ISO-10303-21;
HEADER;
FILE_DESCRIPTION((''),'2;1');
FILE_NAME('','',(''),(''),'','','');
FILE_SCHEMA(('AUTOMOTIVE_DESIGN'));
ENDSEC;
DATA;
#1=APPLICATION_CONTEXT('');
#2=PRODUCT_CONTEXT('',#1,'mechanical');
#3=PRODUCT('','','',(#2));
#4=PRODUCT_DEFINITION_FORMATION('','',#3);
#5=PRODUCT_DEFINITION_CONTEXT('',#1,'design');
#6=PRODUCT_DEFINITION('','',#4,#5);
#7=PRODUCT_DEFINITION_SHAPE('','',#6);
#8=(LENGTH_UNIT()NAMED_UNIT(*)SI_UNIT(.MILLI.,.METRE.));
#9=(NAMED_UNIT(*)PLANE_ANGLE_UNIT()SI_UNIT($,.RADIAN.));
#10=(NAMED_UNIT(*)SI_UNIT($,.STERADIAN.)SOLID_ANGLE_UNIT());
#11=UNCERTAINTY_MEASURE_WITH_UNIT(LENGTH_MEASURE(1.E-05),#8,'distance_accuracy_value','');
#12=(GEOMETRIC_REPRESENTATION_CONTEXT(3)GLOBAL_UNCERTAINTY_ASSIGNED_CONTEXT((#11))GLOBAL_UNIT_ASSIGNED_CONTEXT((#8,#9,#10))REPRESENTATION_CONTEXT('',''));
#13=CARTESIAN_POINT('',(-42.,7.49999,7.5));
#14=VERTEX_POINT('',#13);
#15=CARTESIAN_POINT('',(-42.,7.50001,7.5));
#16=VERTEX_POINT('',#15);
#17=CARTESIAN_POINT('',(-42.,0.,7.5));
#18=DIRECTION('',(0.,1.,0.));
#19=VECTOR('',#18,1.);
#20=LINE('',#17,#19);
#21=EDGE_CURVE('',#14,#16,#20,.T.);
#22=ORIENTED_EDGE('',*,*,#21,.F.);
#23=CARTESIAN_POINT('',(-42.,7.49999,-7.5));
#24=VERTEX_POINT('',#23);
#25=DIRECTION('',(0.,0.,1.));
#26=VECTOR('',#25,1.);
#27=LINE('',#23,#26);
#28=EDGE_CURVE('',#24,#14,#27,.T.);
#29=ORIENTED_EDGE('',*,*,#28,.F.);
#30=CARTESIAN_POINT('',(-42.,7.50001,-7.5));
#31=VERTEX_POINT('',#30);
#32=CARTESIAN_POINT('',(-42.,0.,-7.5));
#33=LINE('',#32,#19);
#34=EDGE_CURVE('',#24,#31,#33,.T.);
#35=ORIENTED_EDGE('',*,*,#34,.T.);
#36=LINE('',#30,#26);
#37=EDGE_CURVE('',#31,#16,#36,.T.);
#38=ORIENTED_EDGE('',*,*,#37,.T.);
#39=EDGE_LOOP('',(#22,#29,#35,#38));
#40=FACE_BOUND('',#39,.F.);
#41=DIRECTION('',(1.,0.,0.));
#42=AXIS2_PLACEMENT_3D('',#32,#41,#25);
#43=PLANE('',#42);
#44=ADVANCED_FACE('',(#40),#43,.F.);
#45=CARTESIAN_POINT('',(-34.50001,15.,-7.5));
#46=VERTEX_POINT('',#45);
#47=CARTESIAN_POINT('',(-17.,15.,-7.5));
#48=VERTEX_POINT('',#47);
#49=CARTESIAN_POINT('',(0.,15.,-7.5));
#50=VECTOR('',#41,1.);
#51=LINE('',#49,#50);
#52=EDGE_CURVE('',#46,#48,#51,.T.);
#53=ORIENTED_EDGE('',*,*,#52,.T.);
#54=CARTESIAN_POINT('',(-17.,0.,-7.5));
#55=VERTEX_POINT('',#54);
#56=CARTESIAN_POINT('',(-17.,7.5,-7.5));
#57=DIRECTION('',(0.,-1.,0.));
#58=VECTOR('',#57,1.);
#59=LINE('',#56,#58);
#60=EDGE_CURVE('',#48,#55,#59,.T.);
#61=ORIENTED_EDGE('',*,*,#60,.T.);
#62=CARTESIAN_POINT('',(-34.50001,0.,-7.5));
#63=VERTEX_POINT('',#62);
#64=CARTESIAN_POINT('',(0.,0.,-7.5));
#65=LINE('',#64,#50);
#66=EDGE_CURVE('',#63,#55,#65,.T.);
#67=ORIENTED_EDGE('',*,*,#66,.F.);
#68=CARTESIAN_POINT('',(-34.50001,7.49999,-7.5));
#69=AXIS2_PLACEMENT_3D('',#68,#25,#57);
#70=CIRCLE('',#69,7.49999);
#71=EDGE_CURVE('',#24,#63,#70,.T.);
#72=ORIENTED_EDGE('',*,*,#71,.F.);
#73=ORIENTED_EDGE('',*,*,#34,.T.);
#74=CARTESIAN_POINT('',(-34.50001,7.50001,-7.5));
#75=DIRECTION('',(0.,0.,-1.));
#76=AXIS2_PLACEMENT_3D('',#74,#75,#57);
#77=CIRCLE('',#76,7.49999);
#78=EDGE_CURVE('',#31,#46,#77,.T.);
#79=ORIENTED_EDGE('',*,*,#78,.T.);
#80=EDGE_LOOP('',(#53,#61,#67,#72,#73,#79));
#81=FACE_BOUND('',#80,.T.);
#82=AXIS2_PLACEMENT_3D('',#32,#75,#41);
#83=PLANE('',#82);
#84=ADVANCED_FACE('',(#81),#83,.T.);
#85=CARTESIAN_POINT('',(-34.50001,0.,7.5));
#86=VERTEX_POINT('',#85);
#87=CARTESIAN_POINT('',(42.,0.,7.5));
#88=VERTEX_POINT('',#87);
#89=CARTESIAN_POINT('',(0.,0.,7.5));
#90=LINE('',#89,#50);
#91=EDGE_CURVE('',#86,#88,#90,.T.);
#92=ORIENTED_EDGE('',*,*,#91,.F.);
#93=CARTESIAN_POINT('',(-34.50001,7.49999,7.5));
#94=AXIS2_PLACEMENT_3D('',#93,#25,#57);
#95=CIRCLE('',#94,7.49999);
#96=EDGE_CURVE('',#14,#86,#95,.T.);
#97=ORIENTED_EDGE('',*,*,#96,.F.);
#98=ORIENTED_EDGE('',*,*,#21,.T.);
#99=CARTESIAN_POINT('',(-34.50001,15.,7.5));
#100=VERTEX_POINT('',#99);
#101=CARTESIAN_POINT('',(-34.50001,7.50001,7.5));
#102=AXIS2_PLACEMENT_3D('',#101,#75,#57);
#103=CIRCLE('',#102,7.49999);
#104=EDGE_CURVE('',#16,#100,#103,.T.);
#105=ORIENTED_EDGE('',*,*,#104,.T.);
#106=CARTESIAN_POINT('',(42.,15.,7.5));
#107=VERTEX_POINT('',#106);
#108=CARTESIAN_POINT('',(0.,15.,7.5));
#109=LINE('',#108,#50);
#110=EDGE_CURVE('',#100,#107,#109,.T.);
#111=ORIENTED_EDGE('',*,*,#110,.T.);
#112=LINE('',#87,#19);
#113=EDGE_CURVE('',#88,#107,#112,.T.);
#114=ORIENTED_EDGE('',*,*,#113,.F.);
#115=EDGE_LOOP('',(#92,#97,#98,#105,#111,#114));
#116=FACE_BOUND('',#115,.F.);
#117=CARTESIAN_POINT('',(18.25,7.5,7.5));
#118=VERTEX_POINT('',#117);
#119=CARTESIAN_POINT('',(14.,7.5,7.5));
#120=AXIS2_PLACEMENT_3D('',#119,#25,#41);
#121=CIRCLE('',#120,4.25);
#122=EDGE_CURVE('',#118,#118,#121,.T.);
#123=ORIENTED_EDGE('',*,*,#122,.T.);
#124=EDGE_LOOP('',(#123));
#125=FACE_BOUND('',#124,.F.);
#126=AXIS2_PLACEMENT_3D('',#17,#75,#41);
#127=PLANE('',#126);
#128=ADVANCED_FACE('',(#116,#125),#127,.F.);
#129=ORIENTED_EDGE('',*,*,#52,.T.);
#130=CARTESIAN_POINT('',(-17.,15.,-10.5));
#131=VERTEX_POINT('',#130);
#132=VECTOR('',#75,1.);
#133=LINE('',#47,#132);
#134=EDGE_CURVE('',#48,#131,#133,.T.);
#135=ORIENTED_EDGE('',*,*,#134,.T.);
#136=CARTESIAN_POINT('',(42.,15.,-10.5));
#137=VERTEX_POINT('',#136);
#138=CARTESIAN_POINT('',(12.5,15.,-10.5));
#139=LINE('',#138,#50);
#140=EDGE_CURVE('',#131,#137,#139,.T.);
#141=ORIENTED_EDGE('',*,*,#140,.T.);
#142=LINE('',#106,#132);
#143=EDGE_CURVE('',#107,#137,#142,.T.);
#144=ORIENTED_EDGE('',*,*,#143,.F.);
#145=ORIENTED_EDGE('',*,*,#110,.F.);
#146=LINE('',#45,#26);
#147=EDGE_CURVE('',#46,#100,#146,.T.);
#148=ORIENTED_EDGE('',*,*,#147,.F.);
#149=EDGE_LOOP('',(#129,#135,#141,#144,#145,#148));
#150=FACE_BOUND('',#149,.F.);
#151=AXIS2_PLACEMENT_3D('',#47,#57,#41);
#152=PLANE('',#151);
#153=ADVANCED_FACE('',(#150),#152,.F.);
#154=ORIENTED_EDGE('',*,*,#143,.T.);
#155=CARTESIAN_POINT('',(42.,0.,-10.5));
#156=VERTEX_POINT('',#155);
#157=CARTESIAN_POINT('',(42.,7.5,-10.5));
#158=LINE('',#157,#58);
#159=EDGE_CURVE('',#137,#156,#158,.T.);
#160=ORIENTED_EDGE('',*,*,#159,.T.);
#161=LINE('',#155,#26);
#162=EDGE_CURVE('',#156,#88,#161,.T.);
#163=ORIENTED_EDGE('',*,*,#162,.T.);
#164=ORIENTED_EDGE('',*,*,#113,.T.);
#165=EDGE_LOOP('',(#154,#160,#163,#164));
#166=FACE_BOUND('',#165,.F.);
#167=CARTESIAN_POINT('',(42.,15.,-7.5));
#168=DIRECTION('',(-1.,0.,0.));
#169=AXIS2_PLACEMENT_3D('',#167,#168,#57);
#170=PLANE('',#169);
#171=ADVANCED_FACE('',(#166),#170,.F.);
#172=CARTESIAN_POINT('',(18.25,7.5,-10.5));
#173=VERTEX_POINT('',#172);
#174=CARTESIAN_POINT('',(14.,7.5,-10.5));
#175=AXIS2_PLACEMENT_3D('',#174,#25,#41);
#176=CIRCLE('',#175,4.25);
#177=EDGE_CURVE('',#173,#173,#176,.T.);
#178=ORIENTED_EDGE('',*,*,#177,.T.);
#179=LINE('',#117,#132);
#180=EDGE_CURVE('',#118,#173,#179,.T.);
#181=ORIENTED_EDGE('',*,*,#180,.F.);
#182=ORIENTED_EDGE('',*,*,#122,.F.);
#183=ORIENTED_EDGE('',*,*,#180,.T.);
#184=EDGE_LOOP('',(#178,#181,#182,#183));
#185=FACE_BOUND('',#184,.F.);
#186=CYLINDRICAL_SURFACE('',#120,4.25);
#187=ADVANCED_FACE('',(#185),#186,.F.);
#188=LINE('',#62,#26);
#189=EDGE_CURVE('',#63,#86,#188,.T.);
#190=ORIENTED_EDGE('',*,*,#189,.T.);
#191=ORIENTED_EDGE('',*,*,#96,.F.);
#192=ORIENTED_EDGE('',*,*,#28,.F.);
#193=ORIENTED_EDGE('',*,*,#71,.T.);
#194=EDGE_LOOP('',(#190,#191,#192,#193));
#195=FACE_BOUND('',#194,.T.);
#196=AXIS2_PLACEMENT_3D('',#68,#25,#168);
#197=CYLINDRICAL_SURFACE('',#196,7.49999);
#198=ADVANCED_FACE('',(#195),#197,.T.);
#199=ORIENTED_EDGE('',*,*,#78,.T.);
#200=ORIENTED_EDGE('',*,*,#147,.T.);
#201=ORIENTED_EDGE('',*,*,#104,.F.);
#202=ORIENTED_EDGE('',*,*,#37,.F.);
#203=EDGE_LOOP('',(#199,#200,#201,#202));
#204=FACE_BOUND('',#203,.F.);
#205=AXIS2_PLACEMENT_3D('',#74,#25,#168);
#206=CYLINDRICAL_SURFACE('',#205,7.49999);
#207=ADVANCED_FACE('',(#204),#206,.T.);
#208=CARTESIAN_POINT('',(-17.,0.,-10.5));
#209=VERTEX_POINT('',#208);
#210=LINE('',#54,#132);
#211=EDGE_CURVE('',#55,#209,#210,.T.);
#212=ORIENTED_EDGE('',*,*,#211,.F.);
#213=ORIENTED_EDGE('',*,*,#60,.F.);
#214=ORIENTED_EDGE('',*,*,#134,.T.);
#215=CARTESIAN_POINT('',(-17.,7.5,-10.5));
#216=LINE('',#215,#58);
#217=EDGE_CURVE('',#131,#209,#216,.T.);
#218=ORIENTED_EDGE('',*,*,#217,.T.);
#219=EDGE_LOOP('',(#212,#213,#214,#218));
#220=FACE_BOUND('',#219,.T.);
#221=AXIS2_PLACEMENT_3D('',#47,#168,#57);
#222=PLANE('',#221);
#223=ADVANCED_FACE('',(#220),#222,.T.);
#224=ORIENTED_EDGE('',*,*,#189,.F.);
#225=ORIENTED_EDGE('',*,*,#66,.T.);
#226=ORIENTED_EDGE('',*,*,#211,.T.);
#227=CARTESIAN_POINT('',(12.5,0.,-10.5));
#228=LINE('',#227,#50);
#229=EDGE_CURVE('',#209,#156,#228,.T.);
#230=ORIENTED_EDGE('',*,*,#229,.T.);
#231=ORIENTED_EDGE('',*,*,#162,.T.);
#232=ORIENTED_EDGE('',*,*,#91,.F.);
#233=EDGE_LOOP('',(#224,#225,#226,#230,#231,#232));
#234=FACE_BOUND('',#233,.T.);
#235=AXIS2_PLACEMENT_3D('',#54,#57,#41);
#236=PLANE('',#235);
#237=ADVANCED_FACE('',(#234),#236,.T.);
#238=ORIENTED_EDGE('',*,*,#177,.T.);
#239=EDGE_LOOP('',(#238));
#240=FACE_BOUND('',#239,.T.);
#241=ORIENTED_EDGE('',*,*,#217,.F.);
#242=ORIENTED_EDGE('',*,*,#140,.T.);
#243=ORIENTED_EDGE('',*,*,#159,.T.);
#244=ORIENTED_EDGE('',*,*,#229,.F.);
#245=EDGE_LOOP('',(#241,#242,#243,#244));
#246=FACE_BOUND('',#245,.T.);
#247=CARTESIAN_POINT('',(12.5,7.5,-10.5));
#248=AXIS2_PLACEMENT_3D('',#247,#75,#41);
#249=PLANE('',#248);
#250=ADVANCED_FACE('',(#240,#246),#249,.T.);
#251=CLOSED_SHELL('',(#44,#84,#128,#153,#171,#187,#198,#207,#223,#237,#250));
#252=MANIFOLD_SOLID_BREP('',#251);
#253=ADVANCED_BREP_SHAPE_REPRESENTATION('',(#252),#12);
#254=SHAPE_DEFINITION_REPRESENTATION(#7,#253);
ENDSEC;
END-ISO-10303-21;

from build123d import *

# Parameters (mm, degrees)
F0_W     = 84
F0_H     = 15
F1_DEPTH = 15
F3_R     = 7.49999
F4_W     = 59
F4_H     = 15
F5_DEPTH = 3
F2_R     = 4.25
F6_DEPTH = 18.001


# Not quite as in the source:
# - a fillet or chamfer is up to 0.001 mm smaller than in the source, because OpenCascade refuses the exact size


with BuildPart() as f1:
    # F0 (on Front) → F1 (new body)
    with BuildSketch(Plane.XZ):
        Rectangle(F0_W, F0_H)
    extrude(amount=-F1_DEPTH)

    # F3 (radius 7.5 in the source; OpenCascade refuses exactly that, so slightly less here)
    f3_edges = [f1.edges().sort_by_distance(p)[0] for p in [
        (-42, 15, 0),
        (-42, 0, 0),
    ]]
    fillet(f3_edges, radius=F3_R)

    # F4 (on face) → F5 (join)
    with BuildSketch(Plane(origin=(0, 0, -7.5), x_dir=(1, 0, 0), z_dir=(0, 0, -1))):
        with Locations((12.5, -7.5)):
            Rectangle(F4_W, F4_H)
    extrude(amount=F5_DEPTH)

    # F2 (on face) → F6 (cut, through all)
    with BuildSketch(Plane.XY.offset(7.5)):
        with Locations((14, 7.5)):
            Circle(F2_R)
    extrude(amount=-F6_DEPTH, mode=Mode.SUBTRACT)


solid = f1.part
